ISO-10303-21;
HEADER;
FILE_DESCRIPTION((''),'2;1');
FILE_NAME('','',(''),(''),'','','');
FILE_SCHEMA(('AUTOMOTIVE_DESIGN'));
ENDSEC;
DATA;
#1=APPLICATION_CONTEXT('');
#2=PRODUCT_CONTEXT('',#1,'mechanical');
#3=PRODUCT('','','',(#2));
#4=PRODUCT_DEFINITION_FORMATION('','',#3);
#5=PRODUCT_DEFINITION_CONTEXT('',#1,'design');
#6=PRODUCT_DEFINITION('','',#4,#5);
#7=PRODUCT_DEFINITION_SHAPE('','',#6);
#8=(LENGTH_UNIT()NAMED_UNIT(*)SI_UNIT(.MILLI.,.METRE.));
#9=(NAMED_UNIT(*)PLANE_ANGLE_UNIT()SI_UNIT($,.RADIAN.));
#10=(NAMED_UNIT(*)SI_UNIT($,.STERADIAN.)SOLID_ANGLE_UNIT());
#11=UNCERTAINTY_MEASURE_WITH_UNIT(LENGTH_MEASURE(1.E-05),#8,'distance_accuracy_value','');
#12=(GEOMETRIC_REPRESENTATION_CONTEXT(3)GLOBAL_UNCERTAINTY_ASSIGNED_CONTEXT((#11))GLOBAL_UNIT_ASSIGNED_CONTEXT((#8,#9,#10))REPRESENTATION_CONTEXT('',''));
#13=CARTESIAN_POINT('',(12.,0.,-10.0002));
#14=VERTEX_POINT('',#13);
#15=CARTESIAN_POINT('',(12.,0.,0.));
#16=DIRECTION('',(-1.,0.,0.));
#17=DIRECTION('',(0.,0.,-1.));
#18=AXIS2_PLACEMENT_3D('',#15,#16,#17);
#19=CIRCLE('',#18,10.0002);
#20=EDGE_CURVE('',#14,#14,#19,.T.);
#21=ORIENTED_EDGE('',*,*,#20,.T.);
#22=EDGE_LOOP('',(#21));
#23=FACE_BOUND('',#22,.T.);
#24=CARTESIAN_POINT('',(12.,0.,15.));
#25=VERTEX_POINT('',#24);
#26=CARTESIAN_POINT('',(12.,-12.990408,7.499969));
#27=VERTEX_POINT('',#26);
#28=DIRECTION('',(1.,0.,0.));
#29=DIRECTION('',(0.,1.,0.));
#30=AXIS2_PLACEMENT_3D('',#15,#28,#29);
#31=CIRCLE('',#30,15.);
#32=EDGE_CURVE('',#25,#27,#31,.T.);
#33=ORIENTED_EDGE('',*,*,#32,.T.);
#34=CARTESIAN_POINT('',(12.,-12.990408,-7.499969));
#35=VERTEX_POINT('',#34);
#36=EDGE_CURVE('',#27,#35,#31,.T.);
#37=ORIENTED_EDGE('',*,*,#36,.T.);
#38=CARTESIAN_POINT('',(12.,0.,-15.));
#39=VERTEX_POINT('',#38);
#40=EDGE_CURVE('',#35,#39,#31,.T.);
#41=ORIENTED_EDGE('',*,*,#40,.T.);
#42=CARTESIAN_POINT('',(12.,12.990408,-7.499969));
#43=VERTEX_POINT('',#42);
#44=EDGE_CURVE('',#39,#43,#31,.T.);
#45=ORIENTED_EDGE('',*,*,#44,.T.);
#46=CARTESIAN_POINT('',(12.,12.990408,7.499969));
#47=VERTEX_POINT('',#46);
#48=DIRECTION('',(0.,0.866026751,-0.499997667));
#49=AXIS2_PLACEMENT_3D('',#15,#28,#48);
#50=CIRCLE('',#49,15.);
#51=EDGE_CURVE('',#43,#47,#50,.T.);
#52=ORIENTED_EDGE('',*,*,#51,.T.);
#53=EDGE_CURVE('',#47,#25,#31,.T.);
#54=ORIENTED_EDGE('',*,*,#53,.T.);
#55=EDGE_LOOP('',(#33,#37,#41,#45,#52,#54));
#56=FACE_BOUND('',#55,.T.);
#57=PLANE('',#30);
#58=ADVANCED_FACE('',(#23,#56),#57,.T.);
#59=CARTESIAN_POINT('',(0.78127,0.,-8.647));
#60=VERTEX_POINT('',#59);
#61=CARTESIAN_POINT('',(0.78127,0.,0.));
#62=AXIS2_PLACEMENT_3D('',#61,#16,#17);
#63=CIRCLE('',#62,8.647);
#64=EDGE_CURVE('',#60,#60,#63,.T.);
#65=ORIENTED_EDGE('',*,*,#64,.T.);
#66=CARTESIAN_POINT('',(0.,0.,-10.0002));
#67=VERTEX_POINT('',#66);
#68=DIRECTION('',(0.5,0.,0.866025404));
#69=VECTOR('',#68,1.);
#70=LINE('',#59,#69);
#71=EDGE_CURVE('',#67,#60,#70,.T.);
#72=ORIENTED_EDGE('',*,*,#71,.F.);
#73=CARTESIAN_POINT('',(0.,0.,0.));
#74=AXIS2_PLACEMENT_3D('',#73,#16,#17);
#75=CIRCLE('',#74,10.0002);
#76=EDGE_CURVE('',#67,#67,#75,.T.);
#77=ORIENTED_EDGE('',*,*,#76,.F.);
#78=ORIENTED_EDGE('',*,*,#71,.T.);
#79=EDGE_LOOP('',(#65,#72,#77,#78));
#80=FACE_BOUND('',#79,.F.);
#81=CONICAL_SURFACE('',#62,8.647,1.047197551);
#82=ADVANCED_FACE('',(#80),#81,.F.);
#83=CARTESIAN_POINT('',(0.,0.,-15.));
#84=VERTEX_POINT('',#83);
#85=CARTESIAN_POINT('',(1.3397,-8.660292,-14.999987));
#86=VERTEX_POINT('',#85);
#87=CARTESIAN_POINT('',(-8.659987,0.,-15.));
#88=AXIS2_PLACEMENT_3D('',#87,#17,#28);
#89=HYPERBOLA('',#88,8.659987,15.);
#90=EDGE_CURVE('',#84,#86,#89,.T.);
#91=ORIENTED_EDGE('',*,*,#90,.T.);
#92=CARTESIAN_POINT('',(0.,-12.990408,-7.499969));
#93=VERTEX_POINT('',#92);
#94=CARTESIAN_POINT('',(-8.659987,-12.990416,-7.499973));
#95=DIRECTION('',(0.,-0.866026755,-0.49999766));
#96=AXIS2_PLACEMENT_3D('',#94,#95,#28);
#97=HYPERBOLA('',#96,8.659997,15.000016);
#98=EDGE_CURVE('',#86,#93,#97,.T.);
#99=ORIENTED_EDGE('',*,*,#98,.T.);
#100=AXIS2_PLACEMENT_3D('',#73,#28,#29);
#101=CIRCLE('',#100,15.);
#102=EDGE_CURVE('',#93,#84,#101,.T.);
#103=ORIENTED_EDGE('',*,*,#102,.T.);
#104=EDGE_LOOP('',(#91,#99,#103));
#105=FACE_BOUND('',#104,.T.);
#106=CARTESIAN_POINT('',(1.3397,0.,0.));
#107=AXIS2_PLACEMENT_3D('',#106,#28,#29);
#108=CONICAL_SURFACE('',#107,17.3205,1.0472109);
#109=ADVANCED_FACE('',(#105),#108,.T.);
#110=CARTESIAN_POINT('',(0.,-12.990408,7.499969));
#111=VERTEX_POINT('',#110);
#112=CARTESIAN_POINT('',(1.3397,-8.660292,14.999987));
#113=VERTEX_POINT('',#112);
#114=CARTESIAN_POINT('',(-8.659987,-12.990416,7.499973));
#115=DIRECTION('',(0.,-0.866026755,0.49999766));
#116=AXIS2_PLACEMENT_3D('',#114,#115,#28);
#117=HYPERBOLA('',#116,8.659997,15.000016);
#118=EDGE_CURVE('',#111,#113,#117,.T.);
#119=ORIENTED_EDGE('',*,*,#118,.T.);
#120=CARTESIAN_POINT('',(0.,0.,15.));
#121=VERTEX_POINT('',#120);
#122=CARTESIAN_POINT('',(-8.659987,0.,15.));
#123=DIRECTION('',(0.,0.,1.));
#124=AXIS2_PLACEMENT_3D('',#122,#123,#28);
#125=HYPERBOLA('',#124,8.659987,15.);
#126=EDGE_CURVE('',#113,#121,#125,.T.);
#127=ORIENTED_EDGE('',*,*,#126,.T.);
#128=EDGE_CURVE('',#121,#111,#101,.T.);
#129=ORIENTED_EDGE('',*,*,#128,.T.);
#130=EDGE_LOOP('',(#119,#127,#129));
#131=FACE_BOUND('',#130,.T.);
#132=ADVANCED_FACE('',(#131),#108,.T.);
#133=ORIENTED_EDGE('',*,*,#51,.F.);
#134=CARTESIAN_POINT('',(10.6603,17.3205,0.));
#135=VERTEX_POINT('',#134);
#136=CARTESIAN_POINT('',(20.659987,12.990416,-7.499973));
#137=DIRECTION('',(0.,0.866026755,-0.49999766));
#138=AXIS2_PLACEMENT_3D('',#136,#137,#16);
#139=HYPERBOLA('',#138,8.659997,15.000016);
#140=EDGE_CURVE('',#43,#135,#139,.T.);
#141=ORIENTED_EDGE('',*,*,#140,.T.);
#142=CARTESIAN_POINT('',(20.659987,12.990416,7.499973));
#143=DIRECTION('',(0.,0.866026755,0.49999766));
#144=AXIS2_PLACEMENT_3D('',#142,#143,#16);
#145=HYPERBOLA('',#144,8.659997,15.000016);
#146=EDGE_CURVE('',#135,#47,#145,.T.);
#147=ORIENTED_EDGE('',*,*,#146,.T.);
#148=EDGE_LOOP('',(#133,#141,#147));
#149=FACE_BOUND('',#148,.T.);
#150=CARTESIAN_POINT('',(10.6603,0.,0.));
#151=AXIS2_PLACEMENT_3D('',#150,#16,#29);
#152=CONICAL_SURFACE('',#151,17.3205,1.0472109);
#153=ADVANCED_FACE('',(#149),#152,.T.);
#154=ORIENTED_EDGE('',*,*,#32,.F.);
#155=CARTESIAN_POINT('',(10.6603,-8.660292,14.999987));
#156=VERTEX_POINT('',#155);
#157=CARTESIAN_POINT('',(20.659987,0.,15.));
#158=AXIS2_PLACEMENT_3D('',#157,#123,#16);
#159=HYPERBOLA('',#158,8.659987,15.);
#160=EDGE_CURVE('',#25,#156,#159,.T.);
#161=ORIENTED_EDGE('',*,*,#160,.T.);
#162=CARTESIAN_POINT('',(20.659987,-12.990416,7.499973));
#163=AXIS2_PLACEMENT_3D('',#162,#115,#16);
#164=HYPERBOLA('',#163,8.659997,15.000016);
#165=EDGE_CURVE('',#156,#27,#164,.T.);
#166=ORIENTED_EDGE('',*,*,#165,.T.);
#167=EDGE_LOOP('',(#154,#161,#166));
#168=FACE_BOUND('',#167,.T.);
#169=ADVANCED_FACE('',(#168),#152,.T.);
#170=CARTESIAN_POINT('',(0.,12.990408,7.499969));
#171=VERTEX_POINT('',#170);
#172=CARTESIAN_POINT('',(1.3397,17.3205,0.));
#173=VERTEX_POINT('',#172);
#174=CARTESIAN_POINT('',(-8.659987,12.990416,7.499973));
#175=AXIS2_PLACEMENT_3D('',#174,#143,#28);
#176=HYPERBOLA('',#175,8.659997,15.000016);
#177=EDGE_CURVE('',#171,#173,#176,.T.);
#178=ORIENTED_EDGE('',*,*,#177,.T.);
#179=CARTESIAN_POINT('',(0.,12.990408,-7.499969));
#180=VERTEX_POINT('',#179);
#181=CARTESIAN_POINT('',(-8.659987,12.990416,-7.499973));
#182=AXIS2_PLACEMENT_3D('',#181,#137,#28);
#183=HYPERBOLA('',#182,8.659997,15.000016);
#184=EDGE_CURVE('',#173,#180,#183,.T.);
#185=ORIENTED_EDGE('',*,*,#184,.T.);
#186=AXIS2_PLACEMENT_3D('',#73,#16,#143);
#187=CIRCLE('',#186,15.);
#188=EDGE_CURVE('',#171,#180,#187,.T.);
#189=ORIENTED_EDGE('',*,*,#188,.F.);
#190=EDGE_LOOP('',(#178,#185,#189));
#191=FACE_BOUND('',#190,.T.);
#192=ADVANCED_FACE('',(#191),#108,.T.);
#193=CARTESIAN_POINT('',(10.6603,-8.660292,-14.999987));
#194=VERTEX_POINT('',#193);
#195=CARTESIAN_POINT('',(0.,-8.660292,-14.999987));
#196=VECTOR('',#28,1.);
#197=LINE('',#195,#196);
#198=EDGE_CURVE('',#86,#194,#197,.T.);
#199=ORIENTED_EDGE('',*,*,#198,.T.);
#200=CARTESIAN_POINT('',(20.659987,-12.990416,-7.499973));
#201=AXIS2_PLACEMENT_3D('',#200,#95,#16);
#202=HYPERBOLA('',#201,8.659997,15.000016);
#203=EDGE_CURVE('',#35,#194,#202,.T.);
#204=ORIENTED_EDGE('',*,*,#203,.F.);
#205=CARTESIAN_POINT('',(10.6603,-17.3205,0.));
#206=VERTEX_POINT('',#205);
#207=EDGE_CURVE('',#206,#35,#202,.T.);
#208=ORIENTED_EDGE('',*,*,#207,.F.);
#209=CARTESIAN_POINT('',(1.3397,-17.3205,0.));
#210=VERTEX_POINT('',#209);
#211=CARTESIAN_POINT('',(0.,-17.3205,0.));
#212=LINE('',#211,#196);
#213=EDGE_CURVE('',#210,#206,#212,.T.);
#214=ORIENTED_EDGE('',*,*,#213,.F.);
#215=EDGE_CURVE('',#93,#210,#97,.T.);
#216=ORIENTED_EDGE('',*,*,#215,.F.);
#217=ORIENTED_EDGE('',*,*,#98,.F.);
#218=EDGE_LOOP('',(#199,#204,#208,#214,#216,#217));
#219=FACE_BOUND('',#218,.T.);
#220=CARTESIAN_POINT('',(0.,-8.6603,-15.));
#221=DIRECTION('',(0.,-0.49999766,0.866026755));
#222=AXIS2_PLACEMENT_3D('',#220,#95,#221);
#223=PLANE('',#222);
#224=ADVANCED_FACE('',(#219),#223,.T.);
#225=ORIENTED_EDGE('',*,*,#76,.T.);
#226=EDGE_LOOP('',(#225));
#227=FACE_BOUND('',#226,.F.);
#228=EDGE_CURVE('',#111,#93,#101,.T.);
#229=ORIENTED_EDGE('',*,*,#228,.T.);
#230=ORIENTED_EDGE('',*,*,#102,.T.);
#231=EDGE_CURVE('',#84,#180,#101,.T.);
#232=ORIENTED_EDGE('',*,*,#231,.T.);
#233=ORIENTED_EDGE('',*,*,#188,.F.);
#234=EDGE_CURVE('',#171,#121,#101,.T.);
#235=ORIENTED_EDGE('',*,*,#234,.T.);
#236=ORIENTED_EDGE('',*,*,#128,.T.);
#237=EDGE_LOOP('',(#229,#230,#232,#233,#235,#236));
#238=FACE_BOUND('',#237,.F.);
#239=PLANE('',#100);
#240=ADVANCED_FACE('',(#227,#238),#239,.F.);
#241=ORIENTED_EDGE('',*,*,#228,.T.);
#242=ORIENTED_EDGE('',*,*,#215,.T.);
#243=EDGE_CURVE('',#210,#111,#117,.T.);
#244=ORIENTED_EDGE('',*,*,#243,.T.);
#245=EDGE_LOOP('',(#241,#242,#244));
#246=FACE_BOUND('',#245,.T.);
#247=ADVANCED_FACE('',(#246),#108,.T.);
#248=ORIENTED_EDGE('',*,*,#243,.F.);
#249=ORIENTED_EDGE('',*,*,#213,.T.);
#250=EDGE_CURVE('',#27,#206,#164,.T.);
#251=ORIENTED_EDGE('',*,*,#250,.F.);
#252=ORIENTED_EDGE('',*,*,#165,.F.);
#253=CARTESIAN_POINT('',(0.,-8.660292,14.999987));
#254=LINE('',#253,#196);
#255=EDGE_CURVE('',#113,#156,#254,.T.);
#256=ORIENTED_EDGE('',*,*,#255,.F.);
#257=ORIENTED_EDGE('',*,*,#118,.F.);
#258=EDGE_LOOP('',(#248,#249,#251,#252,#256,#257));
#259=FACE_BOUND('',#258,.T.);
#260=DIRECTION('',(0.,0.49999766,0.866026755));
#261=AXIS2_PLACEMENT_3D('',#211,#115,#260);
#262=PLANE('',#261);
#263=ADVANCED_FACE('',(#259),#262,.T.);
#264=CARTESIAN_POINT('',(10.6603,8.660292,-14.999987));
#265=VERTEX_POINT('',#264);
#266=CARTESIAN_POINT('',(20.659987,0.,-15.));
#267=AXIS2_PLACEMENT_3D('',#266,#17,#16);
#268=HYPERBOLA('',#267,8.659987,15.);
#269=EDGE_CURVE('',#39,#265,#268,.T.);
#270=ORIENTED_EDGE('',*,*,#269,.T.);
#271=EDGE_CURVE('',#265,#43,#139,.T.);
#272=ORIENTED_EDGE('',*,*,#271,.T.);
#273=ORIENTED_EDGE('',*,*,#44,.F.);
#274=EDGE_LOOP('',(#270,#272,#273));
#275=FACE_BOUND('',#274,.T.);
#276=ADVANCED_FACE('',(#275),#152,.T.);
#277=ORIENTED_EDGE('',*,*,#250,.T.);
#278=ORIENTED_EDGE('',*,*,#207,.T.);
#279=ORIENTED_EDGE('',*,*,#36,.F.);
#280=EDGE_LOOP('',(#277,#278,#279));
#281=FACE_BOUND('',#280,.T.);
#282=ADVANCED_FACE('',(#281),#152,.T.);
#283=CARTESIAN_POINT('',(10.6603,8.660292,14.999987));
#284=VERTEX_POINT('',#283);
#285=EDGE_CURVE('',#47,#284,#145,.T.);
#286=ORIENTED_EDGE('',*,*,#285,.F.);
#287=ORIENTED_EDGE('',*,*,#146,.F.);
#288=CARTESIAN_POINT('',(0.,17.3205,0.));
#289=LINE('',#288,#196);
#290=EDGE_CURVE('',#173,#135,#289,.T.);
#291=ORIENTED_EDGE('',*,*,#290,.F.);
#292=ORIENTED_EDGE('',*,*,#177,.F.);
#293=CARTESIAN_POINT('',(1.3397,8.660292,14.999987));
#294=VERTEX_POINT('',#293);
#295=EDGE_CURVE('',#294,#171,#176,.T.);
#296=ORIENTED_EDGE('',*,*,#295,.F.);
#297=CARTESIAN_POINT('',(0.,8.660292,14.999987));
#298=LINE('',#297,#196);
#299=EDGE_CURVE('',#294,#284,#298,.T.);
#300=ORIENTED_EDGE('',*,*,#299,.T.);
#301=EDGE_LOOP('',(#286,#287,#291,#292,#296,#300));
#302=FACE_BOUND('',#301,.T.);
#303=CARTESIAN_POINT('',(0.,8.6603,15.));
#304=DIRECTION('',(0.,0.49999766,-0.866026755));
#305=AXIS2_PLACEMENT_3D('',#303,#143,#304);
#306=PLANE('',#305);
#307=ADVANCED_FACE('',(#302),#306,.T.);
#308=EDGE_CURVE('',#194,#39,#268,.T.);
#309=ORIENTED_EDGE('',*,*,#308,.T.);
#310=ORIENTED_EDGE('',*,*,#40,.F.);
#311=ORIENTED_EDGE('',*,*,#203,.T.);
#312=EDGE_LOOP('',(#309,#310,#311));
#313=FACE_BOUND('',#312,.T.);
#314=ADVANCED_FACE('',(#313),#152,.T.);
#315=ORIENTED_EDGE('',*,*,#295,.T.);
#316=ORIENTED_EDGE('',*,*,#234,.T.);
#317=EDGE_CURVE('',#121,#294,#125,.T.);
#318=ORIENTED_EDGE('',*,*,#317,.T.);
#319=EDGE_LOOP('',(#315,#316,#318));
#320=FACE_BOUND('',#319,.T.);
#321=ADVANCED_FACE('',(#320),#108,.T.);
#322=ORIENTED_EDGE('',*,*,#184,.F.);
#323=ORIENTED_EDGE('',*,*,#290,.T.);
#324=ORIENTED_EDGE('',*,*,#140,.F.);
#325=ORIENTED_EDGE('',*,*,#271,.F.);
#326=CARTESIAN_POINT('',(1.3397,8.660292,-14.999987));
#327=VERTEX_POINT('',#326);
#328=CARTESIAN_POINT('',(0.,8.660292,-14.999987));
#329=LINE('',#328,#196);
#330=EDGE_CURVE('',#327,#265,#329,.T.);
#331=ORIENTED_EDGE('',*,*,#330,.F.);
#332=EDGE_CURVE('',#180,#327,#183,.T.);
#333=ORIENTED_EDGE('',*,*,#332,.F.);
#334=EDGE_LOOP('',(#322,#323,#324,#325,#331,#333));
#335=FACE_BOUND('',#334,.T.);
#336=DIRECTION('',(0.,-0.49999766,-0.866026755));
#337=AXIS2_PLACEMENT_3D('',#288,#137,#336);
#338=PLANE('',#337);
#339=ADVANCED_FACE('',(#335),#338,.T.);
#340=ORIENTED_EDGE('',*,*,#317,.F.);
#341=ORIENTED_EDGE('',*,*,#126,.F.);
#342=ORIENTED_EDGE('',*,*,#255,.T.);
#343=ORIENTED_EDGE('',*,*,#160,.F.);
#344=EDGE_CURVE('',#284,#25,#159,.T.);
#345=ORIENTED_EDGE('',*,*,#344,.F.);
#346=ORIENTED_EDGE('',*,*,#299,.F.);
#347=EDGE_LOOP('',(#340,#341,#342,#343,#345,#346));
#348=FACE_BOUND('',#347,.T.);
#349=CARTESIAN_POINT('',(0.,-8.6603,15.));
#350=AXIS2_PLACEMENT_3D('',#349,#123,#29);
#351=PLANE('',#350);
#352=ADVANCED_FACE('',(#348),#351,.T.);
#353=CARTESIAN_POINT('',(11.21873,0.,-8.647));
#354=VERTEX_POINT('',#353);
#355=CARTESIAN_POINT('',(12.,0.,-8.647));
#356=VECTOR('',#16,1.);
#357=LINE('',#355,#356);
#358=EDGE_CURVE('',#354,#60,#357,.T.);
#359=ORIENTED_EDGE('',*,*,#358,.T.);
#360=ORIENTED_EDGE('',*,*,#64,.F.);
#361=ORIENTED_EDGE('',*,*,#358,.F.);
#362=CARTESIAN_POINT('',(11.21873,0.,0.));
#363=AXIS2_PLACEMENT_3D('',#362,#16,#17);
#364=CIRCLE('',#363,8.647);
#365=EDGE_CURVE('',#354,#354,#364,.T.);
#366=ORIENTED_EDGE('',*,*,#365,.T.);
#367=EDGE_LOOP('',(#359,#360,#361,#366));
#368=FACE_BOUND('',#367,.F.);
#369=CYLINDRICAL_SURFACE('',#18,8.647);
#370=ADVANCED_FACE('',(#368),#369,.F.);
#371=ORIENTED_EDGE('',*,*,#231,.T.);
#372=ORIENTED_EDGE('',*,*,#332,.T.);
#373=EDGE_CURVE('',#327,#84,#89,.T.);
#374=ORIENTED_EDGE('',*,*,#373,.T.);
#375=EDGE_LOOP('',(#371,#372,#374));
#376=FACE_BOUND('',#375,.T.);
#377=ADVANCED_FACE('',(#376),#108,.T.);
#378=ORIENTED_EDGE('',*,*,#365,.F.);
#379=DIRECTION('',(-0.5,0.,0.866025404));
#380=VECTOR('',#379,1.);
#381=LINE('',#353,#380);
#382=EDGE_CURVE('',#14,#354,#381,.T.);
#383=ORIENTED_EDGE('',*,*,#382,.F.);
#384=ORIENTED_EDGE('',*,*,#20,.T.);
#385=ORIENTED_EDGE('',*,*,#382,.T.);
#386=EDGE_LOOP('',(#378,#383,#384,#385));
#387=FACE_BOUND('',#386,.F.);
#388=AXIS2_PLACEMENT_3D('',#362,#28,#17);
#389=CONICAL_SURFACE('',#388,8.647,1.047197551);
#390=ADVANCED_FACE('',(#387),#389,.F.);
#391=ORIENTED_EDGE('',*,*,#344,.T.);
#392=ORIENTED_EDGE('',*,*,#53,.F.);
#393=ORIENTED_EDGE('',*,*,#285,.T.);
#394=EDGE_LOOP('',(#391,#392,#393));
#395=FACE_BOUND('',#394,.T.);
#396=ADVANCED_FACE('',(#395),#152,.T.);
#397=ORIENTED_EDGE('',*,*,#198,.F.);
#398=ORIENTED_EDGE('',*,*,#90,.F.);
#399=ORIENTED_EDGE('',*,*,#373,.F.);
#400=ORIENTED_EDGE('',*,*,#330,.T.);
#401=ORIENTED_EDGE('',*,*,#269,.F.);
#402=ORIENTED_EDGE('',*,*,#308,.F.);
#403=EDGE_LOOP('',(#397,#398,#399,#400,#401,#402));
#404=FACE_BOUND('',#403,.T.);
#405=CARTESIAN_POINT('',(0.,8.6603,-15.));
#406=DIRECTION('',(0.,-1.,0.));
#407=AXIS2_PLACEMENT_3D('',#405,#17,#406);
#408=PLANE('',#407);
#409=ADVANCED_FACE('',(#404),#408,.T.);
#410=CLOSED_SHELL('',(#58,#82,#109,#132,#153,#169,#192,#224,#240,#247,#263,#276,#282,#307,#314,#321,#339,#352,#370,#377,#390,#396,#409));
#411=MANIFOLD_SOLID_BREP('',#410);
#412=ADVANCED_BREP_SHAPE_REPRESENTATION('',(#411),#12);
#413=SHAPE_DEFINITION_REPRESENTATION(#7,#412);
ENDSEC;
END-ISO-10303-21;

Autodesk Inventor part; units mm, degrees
ref_plane "YZ Plane" through (0, 0, 0) normal (1, 0, 0) x (0, 1, 0)
ref_plane "XZ Plane" through (0, 0, 0) normal (0, 1, 0) x (-1, 0, 0)
sketch "草圖1" plane through (0, 0, 0) normal (1, 0, 0) x (0, 1, 0)
  line L0 (-17.3205, 0) -> (-8.6603, 15)
  line L1 (-8.6603, 15) -> (8.6603, 15)
  line L2 (8.6603, 15) -> (17.3205, 0)
  line L3 (17.3205, 0) -> (8.6603, -15)
  line L4 (8.6603, -15) -> (-8.6603, -15)
  line L5 (-8.6603, -15) -> (-17.3205, 0)
  point P0 (0, 0)
  point P1 (0, 0)
  dimension "d0" = 34.641
extrude "本體" add sketch "草圖1" along normal blind 12
sketch "草圖2" plane through (0, 0, 0) normal (0, 0, 1) x (1, 0, 0)
  line L0 (0, 8.6603) -> (0, 17.3205) projected
  line L1 (0, 17.3205) -> (12, 17.3205) projected
  line L2 (12, 8.6603) -> (12, 17.3205) projected
  line L3 (-2.4, 0) -> (14.4, 0) projected
  line L4 (1.3397, 17.3205) -> (0, 15)
  line L5 (10.6603, 17.3205) -> (12, 15)
  dimension "d3" = 30
  dimension "d4" = 30
  dimension "d5" = 30
  dimension "d6" = 30
revolve "倒角1" cut sketch "草圖2" angle 360 about axis through (-10, 0, 0) along (1, 0, 0)
sketch "草圖3" plane through (12, 0, 0) normal (1, 0, 0) x (0, 0, -1)
  arc A0 (-7.5, -12.9904) -> (7.5, -12.9904) centre (0, 0) ccw projected
hole "螺紋" at (12, 0, 0) direction (-1, 0, 0) diameter 17.294 end through all thread size "M20x2.5" class "6H" standard "ISO Metric profile"
chamfer "倒角2" distance 1.3532 angle 30 1 edges at (12, 0, 8.647) measured on face at (12, -12.8065, -0.3474)
chamfer "倒角3" distance 1.3532 angle 30 1 edges at (0, 0, 8.647) measured on face at (0, -12.8065, -0.3474)
ref_plane "Work Plane1" through (-35.3709, 0, 0) normal (0, -0.8660254, -0.5) x (1, 0, 0)
equation "\"d0\" = 1.1547 * SW"
equation "\"d1\" = KOH"
equation "\"d3\" = ANG1"
equation "\"d4\" = ANG2"
equation "\"d5\" = SW0"
equation "\"d6\" = SW01"
equation "\"d8\" = -0.5 * GD1 + 0.5 * NND"
equation "\"d40\" = -0.5 * GD1 + 0.5 * NND"
equation "\"d10\" = -0.5 * GD1 + 0.5 * NND"
equation "\"d41\" = -0.5 * GD1 + 0.5 * NND"
equation "\"ANG1\" = 30deg"
equation "\"ANG2\" = 30deg"
equation "\"KOH\" = 12"
equation "\"SW0\" = SW"
equation "\"SW01\" = SW"
equation "\"GUL\" = 0.541266 * PTC"
equation "\"TOA\" = 30deg"
equation "\"PTC\" = 2.5"
equation "\"E0\" = 1.155 * SW"
equation "\"GAL\" = 0.541266 * PTC"
equation "\"SW\" = 30"
equation "\"GD1\" = 17.293671"
equation "\"NND\" = 20"
properties part number "AS 1112 - M20" material "鋼、可鍛"
